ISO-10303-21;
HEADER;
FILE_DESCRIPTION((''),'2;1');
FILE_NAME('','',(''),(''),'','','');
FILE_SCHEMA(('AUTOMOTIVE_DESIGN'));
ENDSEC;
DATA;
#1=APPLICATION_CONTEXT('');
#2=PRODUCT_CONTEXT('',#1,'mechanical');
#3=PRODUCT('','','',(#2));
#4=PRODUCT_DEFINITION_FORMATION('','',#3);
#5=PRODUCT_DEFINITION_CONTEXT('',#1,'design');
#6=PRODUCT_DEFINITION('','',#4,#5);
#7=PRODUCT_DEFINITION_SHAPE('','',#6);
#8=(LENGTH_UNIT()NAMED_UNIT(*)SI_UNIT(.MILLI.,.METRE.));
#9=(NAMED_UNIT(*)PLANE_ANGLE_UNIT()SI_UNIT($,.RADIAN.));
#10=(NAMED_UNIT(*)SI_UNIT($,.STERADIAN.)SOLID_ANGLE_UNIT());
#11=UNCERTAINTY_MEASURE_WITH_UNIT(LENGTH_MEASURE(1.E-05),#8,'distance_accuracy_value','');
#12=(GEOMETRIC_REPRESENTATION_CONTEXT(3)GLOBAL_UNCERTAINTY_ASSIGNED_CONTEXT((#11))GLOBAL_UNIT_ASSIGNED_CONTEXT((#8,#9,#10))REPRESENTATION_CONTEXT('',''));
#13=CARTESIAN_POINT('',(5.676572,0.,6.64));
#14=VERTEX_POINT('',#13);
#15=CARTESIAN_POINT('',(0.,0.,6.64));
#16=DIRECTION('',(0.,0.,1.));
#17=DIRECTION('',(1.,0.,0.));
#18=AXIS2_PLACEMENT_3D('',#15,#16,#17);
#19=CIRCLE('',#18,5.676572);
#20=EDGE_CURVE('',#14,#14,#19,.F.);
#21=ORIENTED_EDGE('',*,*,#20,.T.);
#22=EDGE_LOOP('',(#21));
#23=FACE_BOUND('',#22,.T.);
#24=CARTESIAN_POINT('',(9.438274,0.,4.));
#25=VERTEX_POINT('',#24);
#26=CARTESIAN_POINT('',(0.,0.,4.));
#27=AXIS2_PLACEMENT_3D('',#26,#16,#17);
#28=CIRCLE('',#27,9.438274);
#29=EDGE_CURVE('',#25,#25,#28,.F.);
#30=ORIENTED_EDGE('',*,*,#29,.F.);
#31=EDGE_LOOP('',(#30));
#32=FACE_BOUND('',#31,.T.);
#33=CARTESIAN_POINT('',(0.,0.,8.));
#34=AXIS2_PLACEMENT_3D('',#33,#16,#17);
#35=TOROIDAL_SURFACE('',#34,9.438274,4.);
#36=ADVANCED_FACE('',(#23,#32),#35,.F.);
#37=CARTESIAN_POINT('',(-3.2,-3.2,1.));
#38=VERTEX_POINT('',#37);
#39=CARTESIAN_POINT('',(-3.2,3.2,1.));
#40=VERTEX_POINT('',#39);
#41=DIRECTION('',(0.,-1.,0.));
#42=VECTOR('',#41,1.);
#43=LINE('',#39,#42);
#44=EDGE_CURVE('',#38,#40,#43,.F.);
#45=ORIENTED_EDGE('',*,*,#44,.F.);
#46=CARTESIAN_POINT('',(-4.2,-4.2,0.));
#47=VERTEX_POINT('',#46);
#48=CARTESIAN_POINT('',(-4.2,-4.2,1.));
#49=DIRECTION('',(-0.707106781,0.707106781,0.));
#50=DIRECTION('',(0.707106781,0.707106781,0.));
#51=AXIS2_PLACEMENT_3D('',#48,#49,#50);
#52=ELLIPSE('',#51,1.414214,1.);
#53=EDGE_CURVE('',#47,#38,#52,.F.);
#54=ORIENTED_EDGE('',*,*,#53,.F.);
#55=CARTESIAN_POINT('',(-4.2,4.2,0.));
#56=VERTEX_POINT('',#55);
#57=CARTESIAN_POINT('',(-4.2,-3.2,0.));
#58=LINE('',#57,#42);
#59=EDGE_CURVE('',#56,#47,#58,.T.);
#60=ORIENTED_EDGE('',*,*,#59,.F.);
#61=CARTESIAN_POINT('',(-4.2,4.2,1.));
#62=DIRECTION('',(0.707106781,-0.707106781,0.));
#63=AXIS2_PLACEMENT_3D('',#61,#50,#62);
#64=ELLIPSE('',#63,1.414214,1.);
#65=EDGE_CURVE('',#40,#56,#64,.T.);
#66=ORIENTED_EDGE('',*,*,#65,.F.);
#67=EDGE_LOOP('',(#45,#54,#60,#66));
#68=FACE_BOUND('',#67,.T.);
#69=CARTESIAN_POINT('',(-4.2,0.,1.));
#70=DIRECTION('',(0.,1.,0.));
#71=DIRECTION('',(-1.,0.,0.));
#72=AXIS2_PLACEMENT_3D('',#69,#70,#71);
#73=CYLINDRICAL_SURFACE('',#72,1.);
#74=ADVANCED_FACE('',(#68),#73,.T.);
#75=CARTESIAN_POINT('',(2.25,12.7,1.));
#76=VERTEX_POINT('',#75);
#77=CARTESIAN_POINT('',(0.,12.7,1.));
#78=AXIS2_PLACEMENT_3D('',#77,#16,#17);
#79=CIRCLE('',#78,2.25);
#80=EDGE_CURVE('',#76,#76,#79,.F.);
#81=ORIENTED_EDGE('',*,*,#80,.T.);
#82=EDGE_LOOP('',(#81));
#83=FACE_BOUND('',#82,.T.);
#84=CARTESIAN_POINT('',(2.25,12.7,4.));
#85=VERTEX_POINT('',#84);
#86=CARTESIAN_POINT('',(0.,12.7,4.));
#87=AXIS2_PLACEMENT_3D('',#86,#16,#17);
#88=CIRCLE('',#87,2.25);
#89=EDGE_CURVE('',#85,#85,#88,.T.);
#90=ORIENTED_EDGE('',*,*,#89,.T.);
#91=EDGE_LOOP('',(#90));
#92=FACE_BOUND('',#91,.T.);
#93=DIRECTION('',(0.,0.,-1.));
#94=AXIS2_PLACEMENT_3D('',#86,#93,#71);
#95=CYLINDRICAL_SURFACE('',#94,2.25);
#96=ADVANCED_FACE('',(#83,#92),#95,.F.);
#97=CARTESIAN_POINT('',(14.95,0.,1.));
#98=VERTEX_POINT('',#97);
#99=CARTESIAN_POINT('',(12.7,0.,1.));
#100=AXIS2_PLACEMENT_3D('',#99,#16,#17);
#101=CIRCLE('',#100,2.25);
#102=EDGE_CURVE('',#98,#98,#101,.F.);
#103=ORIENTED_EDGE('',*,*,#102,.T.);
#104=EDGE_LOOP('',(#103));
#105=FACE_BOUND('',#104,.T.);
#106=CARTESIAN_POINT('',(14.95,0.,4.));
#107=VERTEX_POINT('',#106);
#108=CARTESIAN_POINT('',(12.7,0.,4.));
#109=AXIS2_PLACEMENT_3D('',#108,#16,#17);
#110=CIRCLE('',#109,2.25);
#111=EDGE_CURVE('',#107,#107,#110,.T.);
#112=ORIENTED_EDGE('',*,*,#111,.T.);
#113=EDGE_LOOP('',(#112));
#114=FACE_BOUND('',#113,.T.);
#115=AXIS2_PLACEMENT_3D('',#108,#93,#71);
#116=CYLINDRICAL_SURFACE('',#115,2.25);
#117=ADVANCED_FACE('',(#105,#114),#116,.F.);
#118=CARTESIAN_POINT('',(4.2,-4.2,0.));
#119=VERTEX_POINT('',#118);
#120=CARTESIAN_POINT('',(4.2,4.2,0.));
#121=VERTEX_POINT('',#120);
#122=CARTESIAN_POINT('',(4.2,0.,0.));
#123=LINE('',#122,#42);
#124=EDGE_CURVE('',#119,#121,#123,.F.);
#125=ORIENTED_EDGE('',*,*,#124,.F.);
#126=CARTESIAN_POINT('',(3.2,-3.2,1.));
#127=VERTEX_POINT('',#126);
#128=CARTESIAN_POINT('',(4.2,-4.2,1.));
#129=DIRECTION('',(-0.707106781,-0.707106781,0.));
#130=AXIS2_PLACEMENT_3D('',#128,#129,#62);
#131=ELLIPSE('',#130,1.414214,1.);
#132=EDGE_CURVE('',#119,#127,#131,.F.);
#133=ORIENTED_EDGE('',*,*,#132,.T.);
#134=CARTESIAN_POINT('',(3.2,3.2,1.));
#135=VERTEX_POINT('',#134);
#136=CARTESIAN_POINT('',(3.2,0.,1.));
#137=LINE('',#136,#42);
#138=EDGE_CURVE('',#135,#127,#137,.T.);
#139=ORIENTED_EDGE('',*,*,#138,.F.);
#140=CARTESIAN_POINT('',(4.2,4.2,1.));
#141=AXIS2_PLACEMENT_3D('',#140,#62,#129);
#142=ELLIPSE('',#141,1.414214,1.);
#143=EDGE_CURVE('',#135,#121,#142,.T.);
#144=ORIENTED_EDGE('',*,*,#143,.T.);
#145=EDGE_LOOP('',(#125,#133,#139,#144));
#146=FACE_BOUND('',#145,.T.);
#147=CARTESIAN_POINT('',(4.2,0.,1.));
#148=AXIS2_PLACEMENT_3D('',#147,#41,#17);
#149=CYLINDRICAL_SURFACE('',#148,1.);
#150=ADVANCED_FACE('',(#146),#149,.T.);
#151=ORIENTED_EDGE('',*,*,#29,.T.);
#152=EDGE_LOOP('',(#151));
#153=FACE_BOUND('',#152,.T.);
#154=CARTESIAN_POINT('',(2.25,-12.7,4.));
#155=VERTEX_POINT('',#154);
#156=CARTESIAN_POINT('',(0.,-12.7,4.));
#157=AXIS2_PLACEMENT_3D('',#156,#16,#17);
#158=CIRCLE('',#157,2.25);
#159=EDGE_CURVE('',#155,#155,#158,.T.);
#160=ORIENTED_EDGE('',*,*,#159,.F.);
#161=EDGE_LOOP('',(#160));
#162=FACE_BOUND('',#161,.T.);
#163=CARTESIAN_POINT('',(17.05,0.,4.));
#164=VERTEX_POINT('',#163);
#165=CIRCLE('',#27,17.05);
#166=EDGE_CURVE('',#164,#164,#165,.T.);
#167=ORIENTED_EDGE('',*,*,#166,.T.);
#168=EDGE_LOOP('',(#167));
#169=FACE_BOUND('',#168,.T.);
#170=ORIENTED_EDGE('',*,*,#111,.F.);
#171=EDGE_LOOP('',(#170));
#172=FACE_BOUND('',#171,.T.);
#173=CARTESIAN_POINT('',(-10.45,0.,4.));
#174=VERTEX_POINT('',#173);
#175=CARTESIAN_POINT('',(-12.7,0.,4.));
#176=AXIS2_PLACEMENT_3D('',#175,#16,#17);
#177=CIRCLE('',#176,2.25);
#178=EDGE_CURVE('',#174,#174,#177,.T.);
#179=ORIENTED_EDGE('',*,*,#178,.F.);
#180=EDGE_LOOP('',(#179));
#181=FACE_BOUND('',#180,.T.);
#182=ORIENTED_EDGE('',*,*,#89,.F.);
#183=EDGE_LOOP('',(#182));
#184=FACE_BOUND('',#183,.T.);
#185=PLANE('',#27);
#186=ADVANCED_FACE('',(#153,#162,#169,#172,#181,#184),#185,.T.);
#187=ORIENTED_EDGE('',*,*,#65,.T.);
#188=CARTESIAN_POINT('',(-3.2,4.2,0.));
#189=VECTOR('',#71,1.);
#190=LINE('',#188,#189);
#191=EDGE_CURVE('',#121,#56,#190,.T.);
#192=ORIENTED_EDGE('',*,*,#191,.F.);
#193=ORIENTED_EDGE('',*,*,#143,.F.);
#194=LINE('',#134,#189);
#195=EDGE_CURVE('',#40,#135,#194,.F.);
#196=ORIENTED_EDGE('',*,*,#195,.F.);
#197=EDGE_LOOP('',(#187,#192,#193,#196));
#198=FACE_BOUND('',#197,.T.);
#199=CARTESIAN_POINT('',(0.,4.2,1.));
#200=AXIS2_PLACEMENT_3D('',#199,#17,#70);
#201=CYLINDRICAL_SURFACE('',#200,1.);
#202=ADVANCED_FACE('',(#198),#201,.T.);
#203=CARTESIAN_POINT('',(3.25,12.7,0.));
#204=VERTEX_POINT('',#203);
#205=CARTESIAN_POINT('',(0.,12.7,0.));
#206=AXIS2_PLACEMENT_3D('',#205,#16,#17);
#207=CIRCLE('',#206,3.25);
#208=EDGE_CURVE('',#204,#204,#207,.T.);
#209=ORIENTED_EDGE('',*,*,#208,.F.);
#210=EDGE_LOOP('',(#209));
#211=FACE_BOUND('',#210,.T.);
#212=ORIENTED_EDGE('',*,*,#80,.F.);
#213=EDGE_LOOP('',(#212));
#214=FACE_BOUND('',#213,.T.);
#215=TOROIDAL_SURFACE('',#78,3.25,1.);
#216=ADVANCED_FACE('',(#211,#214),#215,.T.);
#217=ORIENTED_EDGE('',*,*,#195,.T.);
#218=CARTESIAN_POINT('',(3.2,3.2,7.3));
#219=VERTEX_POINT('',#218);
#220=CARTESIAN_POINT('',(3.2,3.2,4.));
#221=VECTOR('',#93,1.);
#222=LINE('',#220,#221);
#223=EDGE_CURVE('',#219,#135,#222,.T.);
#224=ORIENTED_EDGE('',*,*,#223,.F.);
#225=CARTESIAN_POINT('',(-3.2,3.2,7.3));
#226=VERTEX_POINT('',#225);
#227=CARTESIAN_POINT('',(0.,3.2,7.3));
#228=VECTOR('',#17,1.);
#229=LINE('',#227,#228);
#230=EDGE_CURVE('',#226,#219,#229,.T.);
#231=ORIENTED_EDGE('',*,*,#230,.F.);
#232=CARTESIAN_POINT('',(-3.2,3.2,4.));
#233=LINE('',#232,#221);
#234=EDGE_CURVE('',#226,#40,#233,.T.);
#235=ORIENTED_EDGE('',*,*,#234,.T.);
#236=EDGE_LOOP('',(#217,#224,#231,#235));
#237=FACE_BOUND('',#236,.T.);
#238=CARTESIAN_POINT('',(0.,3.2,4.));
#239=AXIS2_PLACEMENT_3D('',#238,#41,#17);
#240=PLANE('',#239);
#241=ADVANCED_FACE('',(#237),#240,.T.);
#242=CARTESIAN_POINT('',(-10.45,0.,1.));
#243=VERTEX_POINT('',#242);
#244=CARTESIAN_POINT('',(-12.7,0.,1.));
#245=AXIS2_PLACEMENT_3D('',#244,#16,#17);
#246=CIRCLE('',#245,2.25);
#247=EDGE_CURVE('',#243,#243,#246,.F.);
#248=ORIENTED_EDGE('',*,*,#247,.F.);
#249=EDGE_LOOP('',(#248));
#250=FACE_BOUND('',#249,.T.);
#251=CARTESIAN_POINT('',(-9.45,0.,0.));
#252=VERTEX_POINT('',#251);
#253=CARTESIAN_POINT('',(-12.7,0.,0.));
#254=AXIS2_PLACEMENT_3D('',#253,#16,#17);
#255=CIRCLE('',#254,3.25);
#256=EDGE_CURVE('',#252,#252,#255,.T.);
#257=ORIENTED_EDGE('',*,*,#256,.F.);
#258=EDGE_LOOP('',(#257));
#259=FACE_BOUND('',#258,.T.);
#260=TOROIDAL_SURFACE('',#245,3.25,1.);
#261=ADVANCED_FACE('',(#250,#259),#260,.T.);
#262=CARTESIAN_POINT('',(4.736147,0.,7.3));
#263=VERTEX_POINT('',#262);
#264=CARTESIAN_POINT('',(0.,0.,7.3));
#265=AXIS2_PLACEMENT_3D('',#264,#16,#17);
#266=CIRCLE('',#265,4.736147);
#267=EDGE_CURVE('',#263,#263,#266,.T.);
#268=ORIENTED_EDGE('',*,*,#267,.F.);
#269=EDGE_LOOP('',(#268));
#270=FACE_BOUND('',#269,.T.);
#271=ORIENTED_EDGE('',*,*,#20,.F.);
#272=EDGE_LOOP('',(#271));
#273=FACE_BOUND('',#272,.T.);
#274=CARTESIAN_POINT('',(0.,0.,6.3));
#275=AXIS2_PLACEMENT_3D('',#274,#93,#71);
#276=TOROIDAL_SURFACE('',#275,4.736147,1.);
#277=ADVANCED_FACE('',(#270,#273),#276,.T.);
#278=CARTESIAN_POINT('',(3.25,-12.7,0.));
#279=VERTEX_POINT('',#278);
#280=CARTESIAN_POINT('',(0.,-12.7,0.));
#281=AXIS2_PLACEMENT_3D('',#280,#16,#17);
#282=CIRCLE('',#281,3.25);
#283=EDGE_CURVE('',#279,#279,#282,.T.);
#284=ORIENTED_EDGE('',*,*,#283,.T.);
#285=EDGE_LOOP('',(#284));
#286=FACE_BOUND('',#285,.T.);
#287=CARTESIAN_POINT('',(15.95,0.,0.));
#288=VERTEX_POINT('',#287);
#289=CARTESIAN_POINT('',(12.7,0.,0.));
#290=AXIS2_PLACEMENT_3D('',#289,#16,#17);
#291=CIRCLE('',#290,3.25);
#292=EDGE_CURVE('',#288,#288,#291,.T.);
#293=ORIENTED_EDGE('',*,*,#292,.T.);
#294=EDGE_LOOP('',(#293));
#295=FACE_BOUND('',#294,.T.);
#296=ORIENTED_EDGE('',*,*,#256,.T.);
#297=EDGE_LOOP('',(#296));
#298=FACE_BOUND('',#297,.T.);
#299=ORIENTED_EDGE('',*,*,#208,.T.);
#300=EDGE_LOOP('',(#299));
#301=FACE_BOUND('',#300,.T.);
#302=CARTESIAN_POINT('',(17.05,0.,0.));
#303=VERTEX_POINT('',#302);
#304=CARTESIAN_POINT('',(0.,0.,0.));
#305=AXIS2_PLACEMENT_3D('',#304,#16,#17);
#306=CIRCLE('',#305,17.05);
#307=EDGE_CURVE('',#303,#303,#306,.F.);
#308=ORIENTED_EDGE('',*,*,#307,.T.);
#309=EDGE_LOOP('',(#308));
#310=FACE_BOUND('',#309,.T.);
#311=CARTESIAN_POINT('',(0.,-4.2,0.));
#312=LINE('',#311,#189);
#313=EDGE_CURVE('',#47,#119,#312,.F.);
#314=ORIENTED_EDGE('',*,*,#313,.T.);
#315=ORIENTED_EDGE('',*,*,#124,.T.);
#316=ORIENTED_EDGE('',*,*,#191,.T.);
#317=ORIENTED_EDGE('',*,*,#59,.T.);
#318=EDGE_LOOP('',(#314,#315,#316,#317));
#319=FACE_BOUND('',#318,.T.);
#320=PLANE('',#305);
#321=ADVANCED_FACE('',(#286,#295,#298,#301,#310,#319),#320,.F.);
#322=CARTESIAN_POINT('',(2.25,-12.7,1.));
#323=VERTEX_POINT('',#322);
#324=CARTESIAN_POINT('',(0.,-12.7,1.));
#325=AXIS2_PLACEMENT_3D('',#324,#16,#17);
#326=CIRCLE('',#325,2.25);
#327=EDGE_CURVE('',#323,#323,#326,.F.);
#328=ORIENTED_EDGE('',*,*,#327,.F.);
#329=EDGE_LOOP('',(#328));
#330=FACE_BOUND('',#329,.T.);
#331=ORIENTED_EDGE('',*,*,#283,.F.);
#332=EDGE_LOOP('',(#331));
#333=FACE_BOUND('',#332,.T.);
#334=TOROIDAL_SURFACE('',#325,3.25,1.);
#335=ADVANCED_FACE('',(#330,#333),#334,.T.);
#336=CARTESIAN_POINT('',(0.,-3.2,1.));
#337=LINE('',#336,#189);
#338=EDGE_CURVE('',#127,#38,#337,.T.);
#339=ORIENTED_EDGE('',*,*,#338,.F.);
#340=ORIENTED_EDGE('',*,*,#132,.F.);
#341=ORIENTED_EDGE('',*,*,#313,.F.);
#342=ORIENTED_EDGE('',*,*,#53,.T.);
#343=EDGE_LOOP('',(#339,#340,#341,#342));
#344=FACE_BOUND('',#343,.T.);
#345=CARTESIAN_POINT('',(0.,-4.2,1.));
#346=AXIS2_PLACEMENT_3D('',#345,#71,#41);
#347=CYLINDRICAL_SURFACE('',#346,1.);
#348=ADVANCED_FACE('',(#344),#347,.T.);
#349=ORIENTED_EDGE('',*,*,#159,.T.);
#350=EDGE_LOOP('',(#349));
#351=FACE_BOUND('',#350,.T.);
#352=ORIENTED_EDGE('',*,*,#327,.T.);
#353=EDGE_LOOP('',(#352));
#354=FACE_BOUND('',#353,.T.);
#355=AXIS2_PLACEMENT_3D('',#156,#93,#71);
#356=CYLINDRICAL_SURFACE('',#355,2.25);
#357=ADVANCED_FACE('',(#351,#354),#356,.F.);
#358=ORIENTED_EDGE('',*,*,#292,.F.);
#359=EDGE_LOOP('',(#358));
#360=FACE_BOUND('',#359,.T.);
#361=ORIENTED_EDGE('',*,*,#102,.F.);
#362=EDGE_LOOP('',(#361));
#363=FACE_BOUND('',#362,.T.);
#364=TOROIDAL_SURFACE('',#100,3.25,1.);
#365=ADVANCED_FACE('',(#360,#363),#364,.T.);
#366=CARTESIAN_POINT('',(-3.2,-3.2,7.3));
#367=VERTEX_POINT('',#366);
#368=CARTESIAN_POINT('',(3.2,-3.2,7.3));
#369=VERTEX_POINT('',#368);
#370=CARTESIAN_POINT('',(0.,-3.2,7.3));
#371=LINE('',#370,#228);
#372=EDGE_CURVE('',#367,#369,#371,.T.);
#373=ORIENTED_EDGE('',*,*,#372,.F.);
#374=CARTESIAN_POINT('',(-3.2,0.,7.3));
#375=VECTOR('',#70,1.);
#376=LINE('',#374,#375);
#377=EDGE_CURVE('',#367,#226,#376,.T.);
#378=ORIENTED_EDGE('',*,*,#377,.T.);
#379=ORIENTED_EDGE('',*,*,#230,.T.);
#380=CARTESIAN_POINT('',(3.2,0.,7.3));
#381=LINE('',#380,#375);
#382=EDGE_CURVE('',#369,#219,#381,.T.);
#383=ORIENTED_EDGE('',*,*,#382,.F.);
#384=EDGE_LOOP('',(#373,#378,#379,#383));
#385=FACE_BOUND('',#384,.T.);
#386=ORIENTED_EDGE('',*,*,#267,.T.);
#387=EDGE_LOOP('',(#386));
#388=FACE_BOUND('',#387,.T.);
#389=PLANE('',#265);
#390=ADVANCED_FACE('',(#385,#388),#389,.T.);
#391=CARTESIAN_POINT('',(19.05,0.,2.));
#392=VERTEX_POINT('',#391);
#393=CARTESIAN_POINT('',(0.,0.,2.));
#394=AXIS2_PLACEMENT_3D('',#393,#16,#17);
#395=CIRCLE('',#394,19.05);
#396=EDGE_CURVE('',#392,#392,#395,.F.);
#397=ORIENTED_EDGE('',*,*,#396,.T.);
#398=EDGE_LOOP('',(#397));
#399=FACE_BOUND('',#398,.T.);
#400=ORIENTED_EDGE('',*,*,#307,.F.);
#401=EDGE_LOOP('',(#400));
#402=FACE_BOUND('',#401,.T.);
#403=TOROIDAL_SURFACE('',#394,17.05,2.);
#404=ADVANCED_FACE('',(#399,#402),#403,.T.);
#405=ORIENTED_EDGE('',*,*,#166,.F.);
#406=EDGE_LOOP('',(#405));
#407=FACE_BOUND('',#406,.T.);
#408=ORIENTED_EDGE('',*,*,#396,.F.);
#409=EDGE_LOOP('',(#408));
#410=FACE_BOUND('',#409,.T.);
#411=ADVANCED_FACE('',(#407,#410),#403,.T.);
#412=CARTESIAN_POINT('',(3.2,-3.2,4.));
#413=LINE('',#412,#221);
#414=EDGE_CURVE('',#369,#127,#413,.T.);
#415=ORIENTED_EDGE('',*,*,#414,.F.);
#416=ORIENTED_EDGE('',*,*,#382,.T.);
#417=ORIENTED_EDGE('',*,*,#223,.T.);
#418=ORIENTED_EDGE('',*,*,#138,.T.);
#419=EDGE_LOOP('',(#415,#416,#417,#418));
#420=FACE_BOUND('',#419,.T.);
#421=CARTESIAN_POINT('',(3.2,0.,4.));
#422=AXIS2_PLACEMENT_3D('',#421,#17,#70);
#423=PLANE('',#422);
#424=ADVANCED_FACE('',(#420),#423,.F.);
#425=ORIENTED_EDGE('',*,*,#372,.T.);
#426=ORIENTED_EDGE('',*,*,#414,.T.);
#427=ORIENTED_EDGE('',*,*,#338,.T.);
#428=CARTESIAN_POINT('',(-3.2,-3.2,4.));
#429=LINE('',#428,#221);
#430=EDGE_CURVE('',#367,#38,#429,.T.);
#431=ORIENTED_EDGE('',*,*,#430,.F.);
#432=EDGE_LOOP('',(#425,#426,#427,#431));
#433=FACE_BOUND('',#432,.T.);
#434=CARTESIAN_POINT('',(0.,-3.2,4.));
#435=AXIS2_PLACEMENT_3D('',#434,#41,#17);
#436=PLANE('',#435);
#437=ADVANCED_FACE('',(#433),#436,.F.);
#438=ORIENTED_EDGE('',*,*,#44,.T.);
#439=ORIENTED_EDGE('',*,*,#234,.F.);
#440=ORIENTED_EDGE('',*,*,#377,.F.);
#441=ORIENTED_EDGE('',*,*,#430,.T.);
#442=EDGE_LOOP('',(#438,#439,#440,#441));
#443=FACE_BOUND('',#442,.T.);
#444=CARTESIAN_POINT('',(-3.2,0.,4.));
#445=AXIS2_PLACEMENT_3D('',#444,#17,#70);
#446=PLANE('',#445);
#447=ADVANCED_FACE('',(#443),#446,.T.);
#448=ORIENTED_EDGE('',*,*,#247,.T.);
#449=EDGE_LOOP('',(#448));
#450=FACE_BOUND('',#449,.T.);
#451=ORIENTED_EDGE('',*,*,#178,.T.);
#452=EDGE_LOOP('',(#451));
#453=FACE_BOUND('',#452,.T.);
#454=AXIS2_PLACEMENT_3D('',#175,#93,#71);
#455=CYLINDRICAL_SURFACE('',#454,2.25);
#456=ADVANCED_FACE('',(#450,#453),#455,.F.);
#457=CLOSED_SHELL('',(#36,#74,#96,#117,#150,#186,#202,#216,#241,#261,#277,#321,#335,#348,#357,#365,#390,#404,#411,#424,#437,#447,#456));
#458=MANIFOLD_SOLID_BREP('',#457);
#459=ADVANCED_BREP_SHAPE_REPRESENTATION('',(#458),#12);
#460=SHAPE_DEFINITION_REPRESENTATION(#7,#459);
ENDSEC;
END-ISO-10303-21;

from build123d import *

# Parameters (mm, degrees)
SKETCH1_R           = 19.05
SKETCH1_R_2         = 5.5
SKETCH1_R_3         = 2.25
SKETCH1_W           = 6.4
SKETCH1_H           = 6.4
BOSS_EXTRUDE1_DEPTH = 4
BOSS_EXTRUDE2_START = 4
SKETCH1_3_R         = 5.5
SKETCH1_3_W         = 6.4
SKETCH1_3_H         = 6.4
BOSS_EXTRUDE2_DEPTH = 3.3
FILLET1_R           = 4
FILLET2_R           = 1
FILLET3_R           = 2
FILLET4_R           = 1


# Some blends are built 0.0001 mm under size
with BuildPart() as part:
    # Sketch1 → Boss-Extrude1 (new body)
    # profile 1 of 2: a face of its own
    with BuildSketch(Plane.XY):
        Circle(SKETCH1_R)
        Circle(SKETCH1_R_2, mode=Mode.SUBTRACT)
        with Locations((12.7, 0)):
            Circle(SKETCH1_R_3, mode=Mode.SUBTRACT)
        with Locations((0, -12.7)):
            Circle(SKETCH1_R_3, mode=Mode.SUBTRACT)
        with Locations((-12.7, 0)):
            Circle(SKETCH1_R_3, mode=Mode.SUBTRACT)
        with Locations((0, 12.7)):
            Circle(SKETCH1_R_3, mode=Mode.SUBTRACT)
    # profile 2 of 2: a face of its own
    with BuildSketch(Plane.XY):
        Circle(SKETCH1_R_2)
        Rectangle(SKETCH1_W, SKETCH1_H, mode=Mode.SUBTRACT)
    extrude(amount=BOSS_EXTRUDE1_DEPTH)

    # Sketch1<3> → Boss-Extrude2 (add)
    with BuildSketch(Plane.XY.offset(BOSS_EXTRUDE2_START)):
        Circle(SKETCH1_3_R)
        Rectangle(SKETCH1_3_W, SKETCH1_3_H, mode=Mode.SUBTRACT)
    extrude(amount=BOSS_EXTRUDE2_DEPTH)

    # Fillet1
    # the kernel refuses this fillet: 4 mm, written as the material it adds along each edge
    with BuildSketch(Plane(origin=(0, 0, 4), x_dir=(1, 0, 0), z_dir=(0, -1, 0))) as fillet1_piece_1:
        with BuildLine():
            CenterArc((9.438273734, 4), FILLET1_R, 190.078658108, 79.921341892)
            Line((5.5, 3.3), (5.421234525, 3.286))
            ThreePointArc((5.421234525, 3.286), (5.42, 1.65), (5.42, 0))
            Line((5.42, 0), (5.5, -0.08))
            Line((5.5, -0.08), (9.438273734, -0.08))
            Line((9.438273734, -0.08), (9.438273734, 0))
        make_face()
    revolve(axis=Axis((0, 0, 4), (0, 0, 1)))

    # Fillet2
    fillet2_edges = [part.edges().sort_by_distance(p)[0] for p in [
        (-5.5, 0, 7.3),
    ]]
    fillet(fillet2_edges, radius=FILLET2_R)

    # Fillet3
    fillet3_edges = [part.edges().sort_by_distance(p)[0] for p in [
        (-19.05, 0, 0),
        (-19.05, 0, 4),
    ]]
    fillet(fillet3_edges, radius=FILLET3_R - 0.0001)  # a hair under: the kernel refuses the full size

    # Fillet4
    fillet4_edges = [part.edges().sort_by_distance(p)[0] for p in [
        (0, -3.2, 0),
        (3.2, 0, 0),
        (0, 3.2, 0),
        (-3.2, 0, 0),
        (-2.25, 12.7, 0),
        (-14.95, 0, 0),
        (-2.25, -12.7, 0),
        (10.45, 0, 0),
    ]]
    fillet(fillet4_edges, radius=FILLET4_R)


solid = part.part
